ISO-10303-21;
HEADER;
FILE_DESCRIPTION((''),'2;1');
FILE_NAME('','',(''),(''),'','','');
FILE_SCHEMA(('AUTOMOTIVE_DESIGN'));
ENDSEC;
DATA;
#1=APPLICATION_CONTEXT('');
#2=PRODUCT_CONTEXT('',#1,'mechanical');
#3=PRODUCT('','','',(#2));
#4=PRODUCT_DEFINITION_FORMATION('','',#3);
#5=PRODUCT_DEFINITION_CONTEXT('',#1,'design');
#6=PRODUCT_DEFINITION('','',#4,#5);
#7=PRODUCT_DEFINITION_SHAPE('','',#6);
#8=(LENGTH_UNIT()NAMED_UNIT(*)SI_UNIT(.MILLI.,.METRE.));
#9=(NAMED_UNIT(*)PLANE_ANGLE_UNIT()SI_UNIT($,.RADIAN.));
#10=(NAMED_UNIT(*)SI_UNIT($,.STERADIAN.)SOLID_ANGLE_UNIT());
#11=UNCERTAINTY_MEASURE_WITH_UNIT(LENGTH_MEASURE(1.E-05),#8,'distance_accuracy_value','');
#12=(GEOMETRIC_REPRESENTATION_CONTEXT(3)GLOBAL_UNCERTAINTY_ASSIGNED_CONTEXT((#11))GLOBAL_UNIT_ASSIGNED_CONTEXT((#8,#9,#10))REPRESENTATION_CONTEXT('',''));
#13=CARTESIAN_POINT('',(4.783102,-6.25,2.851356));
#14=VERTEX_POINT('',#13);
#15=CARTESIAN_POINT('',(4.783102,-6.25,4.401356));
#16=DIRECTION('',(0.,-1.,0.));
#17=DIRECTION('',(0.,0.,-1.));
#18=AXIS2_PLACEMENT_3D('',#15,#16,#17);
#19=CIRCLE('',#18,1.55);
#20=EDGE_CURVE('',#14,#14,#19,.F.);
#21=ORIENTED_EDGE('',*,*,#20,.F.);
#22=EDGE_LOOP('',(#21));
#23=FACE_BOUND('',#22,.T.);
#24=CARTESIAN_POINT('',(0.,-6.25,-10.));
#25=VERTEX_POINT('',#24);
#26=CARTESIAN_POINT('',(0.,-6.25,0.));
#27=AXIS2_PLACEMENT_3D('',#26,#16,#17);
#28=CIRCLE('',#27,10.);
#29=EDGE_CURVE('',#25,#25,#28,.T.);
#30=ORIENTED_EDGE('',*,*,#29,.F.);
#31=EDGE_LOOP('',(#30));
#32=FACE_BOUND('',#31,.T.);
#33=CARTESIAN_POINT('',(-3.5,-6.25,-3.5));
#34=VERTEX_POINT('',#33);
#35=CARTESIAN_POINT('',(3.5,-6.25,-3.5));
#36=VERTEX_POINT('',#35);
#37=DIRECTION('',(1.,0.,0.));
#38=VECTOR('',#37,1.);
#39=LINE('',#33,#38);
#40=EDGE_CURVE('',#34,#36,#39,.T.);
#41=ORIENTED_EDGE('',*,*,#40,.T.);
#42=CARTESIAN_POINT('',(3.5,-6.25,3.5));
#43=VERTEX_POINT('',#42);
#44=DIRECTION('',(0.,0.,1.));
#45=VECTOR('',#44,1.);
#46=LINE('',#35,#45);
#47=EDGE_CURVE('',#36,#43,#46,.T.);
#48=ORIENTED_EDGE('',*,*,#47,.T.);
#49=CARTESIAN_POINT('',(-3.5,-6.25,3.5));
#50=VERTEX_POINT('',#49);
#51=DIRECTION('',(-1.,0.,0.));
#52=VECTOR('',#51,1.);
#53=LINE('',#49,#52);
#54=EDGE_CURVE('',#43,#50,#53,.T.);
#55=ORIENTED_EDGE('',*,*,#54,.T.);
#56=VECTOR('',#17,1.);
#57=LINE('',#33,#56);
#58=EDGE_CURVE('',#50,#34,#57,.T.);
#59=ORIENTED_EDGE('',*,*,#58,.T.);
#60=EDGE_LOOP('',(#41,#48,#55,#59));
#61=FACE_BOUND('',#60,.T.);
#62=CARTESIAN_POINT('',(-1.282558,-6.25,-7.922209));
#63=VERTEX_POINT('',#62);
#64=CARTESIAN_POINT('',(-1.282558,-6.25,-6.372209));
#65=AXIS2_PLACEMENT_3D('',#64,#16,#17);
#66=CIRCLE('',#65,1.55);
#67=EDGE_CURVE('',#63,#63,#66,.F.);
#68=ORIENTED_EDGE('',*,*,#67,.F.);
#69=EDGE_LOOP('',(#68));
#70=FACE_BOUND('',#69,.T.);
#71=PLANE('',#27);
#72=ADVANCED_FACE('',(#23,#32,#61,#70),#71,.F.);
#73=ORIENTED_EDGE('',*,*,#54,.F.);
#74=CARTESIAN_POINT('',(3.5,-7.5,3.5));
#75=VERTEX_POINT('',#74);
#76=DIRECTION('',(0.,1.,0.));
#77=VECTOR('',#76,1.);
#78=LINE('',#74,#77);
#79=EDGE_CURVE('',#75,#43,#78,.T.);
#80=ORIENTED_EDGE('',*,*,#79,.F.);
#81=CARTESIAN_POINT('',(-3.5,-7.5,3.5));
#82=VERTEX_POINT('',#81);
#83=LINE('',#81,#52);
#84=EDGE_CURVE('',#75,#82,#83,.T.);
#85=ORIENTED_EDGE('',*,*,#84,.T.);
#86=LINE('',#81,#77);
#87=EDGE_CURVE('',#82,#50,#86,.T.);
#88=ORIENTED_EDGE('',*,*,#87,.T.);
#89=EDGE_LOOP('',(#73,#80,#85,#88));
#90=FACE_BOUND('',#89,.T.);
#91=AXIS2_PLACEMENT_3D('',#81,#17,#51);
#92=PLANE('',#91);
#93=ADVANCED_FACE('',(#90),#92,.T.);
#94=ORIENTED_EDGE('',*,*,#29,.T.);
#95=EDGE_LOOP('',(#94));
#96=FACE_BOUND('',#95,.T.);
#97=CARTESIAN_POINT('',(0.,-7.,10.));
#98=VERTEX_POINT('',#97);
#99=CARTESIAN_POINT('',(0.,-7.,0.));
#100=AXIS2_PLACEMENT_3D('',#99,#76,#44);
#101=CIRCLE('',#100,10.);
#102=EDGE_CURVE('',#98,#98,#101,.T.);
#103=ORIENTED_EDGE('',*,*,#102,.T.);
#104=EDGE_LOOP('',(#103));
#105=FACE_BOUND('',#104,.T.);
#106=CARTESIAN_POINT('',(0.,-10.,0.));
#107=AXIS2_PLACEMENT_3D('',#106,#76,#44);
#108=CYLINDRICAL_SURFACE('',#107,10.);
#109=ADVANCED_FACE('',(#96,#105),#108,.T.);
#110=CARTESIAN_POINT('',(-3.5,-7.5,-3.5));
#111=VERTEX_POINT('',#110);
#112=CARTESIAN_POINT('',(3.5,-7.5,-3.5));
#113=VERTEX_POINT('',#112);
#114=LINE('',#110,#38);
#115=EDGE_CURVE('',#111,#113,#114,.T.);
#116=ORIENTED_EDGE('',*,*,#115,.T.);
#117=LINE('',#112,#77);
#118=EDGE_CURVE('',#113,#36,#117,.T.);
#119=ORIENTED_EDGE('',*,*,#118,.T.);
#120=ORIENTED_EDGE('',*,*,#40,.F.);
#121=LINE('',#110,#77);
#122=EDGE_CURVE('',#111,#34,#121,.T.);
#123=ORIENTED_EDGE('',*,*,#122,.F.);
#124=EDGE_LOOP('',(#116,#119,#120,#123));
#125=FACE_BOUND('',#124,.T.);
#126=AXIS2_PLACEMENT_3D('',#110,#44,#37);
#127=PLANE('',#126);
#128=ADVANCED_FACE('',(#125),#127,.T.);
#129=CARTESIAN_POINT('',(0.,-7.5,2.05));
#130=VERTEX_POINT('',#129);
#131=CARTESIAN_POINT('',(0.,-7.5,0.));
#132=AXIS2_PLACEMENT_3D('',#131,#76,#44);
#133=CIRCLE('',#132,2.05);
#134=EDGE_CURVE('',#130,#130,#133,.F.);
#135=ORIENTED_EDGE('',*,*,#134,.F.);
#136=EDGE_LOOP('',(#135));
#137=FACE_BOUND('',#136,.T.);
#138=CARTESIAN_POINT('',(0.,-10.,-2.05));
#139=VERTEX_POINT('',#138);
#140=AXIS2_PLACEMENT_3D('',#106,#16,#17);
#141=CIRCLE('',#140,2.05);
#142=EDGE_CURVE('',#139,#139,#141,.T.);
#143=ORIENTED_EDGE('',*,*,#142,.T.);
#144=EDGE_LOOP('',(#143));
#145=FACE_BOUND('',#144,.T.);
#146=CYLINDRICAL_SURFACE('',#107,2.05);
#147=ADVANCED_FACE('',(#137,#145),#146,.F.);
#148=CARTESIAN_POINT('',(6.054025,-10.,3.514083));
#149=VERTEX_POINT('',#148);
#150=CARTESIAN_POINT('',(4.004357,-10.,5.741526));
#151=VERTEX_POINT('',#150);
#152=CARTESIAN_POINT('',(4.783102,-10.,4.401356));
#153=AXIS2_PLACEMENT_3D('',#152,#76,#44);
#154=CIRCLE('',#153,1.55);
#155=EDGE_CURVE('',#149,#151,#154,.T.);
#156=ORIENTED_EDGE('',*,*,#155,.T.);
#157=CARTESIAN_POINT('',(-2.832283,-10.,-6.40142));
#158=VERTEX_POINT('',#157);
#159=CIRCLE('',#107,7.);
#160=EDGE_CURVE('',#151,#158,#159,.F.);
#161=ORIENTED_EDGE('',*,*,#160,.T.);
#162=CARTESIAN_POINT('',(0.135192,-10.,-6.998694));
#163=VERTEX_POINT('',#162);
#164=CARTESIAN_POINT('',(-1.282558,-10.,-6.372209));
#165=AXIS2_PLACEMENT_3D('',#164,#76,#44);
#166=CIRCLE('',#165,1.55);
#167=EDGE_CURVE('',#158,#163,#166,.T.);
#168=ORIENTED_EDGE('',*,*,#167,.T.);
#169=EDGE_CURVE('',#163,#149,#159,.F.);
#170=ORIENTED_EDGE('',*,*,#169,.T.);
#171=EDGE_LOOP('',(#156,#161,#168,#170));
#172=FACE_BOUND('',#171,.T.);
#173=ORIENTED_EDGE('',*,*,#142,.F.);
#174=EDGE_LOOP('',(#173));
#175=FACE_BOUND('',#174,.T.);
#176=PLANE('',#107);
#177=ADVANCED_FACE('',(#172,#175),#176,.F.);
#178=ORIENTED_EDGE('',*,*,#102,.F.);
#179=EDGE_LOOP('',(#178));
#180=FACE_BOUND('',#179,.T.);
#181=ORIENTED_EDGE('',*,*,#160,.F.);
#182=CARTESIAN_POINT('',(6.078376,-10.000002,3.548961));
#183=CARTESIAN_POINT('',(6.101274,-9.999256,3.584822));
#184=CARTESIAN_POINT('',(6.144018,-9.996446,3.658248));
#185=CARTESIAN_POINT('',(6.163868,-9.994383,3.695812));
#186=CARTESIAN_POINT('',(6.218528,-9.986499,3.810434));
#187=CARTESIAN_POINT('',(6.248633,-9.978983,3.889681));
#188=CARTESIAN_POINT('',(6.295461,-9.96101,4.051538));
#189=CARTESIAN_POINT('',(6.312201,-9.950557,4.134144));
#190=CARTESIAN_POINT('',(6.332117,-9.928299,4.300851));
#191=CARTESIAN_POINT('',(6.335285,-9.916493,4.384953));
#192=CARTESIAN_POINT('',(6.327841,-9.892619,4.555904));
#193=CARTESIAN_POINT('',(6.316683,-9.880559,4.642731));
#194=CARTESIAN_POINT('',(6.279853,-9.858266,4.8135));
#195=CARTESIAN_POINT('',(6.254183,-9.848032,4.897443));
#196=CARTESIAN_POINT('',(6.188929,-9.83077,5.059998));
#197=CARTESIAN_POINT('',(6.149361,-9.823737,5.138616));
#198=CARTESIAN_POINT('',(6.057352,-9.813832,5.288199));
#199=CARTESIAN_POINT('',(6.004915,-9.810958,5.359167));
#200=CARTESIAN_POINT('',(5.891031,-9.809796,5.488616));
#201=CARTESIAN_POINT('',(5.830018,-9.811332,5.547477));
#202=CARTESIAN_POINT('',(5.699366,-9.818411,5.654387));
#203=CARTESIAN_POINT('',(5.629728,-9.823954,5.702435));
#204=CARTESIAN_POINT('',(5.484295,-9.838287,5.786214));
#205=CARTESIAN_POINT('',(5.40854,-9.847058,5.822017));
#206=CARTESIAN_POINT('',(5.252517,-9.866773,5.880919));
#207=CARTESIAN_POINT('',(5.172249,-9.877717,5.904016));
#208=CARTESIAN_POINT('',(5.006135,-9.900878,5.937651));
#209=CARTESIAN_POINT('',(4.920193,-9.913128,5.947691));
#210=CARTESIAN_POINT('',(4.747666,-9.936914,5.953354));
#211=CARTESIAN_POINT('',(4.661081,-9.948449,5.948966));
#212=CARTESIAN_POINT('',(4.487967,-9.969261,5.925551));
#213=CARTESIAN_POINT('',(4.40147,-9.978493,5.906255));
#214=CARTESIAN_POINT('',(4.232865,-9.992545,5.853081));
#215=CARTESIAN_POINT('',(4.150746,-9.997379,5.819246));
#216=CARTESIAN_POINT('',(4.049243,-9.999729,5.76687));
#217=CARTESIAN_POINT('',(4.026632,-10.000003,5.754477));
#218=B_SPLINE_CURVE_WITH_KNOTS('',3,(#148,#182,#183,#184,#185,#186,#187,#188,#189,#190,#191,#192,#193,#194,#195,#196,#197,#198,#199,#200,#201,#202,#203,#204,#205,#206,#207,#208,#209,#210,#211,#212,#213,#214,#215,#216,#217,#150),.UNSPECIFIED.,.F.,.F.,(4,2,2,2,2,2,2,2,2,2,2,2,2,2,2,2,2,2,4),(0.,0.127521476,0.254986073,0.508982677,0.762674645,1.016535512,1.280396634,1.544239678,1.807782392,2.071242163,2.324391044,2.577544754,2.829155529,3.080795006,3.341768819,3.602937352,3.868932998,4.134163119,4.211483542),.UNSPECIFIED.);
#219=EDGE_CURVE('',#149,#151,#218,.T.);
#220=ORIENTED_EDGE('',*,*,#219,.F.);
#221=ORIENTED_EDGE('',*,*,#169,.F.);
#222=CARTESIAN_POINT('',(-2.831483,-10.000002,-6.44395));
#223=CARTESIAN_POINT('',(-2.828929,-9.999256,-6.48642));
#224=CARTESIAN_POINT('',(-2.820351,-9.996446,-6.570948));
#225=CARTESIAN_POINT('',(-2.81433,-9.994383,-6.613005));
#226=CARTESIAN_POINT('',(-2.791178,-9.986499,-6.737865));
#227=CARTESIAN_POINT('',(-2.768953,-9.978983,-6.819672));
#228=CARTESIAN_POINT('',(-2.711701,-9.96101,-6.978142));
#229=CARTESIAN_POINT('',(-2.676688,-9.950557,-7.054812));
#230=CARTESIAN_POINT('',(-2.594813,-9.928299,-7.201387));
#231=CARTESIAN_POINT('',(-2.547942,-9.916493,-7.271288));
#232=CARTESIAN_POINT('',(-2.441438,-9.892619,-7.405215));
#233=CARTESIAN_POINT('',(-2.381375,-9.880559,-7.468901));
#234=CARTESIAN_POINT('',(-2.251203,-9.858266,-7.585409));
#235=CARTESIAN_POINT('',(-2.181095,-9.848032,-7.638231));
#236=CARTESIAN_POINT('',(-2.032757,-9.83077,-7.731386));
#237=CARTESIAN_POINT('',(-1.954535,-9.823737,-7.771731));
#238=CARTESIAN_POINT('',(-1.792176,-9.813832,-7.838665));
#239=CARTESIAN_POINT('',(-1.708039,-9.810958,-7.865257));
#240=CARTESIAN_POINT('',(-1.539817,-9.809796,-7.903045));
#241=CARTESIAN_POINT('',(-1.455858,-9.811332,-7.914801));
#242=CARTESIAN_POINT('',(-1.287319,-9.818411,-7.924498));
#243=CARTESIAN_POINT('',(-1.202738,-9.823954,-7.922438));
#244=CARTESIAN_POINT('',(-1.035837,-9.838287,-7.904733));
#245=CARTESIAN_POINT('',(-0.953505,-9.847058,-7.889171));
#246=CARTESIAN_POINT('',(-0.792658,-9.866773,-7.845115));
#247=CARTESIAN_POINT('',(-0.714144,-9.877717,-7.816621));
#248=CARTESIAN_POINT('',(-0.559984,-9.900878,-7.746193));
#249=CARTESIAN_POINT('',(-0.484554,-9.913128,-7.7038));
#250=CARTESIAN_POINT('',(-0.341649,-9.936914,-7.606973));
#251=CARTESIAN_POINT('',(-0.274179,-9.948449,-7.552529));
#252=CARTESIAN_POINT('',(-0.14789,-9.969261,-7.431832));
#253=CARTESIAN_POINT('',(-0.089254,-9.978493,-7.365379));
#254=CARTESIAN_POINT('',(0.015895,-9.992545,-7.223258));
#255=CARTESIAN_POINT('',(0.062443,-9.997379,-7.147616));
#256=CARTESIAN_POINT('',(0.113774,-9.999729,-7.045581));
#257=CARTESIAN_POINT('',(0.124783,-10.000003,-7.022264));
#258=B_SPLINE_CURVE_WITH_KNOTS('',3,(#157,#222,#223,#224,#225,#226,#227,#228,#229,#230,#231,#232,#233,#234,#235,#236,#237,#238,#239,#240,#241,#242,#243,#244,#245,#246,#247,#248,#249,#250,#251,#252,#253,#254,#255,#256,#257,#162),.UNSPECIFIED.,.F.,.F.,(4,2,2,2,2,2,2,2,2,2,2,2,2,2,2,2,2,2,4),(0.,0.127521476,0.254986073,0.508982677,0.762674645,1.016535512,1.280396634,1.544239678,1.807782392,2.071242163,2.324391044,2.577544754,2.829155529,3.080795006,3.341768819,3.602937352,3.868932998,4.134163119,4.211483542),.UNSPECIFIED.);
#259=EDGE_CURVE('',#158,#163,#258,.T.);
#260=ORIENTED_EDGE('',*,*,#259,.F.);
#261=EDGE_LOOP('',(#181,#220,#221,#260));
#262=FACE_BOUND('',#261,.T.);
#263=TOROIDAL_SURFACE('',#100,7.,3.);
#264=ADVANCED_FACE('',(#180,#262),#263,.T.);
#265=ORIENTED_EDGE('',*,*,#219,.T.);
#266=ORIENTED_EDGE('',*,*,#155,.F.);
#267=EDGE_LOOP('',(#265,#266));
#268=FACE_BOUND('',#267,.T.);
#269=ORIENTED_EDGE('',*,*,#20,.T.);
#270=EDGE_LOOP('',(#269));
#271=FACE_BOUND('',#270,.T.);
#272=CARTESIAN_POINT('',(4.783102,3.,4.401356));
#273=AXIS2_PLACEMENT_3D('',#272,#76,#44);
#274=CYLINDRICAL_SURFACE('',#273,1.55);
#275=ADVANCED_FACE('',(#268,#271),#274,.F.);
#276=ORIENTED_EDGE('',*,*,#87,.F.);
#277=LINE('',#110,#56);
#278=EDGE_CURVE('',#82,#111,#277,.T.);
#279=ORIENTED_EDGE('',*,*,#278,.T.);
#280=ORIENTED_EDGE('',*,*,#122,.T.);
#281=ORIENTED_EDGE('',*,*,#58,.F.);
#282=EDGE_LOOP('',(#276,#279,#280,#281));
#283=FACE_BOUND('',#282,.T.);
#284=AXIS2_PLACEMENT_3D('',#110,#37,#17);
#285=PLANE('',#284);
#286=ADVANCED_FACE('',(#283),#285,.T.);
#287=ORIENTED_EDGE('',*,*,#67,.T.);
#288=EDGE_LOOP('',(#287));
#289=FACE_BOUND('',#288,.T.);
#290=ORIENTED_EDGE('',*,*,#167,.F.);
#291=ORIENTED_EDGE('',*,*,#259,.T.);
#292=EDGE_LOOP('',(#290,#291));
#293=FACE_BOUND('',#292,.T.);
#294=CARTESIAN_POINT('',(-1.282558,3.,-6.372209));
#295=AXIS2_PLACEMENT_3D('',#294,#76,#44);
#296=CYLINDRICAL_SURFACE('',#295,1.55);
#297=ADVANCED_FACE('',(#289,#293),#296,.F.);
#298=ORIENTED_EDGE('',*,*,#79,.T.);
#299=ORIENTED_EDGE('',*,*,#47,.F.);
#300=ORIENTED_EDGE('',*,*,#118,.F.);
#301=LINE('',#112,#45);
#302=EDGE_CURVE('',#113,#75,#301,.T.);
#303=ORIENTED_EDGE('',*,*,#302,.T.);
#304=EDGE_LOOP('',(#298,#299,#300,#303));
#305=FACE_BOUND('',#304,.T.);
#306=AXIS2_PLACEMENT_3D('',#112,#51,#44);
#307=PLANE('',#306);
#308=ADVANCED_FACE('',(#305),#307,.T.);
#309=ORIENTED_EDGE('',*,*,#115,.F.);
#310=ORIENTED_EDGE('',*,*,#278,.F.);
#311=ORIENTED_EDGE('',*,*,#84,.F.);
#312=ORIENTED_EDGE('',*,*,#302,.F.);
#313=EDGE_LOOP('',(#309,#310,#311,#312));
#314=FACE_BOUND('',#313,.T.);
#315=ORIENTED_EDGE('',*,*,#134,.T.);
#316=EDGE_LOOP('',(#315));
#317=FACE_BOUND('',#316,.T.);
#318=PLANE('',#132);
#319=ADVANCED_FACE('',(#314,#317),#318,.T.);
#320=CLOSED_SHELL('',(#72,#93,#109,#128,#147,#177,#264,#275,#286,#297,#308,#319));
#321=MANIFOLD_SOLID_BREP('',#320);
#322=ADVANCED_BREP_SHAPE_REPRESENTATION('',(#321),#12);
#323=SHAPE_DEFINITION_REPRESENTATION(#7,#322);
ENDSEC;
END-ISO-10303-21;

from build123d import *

# Parameters (mm, degrees)
BOSS_EXTRUDE1_DEPTH        = 3
BOSS_EXTRUDE1_DEPTH_BACK   = 10
SKETCH1_R                  = 10
SKETCH4_R                  = 1.5
HOLE_DEPTH                 = 20.973741561
HOLECIR_COUNT              = 5
SKETCH6_W                  = 7
SKETCH6_H                  = 7
BEARINGHOLE_DEPTH          = 2.5
SKETCH7_R                  = 2.05
SHAFTHOLE_DEPTH            = 17.248076982
F_3_1_3_1_DIAMETER_HOLE1_D = 3.1
FILLET2_R                  = 3
SKETCH11_R                 = 10
CUT_EXTRUDE1_DEPTH         = 10


with BuildPart() as part:
    # Sketch1 → Boss-Extrude1 (new, two sides: drawn at the far end of the back side and taken through both)
    with BuildSketch(Plane(origin=(0, 0, 0), x_dir=(1, 0, 0), z_dir=(0, 1, 0)).offset(-BOSS_EXTRUDE1_DEPTH_BACK)):
        with Locations(Location((0, 0, 0), (0, 0, 270))):
            Circle(SKETCH1_R)
    extrude(amount=BOSS_EXTRUDE1_DEPTH + BOSS_EXTRUDE1_DEPTH_BACK)

    # Sketch4 → hole (cut, through all)
    with BuildSketch(Plane(origin=(-3.352872105, -1.093066116, 1.887711608), x_dir=(-0.4486862613641547, -0.14627571033740308, -0.8816371449912632), z_dir=(0.8382180262940947, 0.2732665289126682, -0.47192790187872385))):
        with Locations(Location((0, 0, 0), (0, 0, 8.746528197))):
            Circle(SKETCH4_R)
    hole = extrude(amount=-HOLE_DEPTH, mode=Mode.SUBTRACT)

    # holecir: hole ×5 about axis
    holecir_axis = Axis((0, 0, 0), (0, 1, 0))
    for i in range(1, HOLECIR_COUNT):
        add(hole.rotate(holecir_axis, i * 360 / HOLECIR_COUNT), mode=Mode.SUBTRACT)

    # Sketch6 → bearinghole (cut)
    with BuildSketch(Plane(origin=(0, -5, 0), x_dir=(-1, 0, 0), z_dir=(0, -1, 0))):
        Rectangle(SKETCH6_W, SKETCH6_H)
    extrude(amount=BEARINGHOLE_DEPTH, mode=Mode.SUBTRACT)

    # Sketch7 → shafthole (cut, through all)
    with BuildSketch(Plane(origin=(0, -5, 0), x_dir=(-1, 0, 0), z_dir=(0, -1, 0))):
        with Locations(Location((0, 0, 0), (0, 0, 270))):
            Circle(SKETCH7_R)
    extrude(amount=SHAFTHOLE_DEPTH, mode=Mode.SUBTRACT)

    # Ø3.1 (3.1) Diameter Hole1 (through all)
    with Locations(Plane(origin=(0, 3, 0), x_dir=(1, 0, 0), z_dir=(0, 1, 0))):
        with Locations((-1.282558474, 6.372208703), (4.783101903, -4.401356176)):
            Hole(F_3_1_3_1_DIAMETER_HOLE1_D / 2)

    # Fillet2
    # the kernel refuses this fillet: 3 mm, written as the material it takes off along each edge
    with BuildSketch(Plane(origin=(0, 3, 0), x_dir=(0, 0, 1), z_dir=(-1, 0, 0))) as fillet2_piece_1:
        with BuildLine():
            CenterArc((10 - FILLET2_R, -FILLET2_R), FILLET2_R, 0, 90)
            Line((10 - FILLET2_R, 0), (10, 0))
            Line((10, 0), (10, -FILLET2_R))
        make_face()
    revolve(axis=Axis((0, 3, 0), (0, 1, 0)), mode=Mode.SUBTRACT)
    with BuildSketch(Plane(origin=(0, -10, 0), x_dir=(0, 0, 1), z_dir=(-1, 0, 0))) as fillet2_piece_2:
        with BuildLine():
            CenterArc((10 - FILLET2_R, FILLET2_R), FILLET2_R, 270, 90)
            Line((10 - FILLET2_R, 0), (10, 0))
            Line((10, 0), (10, FILLET2_R))
        make_face()
    revolve(axis=Axis((0, -10, 0), (0, 1, 0)), mode=Mode.SUBTRACT)

    # Sketch11 → Cut-Extrude1 (cut)
    with BuildSketch(Plane(origin=(0, -6.25, 0), x_dir=(-1, 0, 0), z_dir=(0, -1, 0))):
        with Locations(Location((0, 0, 0), (0, 0, 270))):
            Circle(SKETCH11_R)
    extrude(amount=-CUT_EXTRUDE1_DEPTH, mode=Mode.SUBTRACT)


solid = part.part
